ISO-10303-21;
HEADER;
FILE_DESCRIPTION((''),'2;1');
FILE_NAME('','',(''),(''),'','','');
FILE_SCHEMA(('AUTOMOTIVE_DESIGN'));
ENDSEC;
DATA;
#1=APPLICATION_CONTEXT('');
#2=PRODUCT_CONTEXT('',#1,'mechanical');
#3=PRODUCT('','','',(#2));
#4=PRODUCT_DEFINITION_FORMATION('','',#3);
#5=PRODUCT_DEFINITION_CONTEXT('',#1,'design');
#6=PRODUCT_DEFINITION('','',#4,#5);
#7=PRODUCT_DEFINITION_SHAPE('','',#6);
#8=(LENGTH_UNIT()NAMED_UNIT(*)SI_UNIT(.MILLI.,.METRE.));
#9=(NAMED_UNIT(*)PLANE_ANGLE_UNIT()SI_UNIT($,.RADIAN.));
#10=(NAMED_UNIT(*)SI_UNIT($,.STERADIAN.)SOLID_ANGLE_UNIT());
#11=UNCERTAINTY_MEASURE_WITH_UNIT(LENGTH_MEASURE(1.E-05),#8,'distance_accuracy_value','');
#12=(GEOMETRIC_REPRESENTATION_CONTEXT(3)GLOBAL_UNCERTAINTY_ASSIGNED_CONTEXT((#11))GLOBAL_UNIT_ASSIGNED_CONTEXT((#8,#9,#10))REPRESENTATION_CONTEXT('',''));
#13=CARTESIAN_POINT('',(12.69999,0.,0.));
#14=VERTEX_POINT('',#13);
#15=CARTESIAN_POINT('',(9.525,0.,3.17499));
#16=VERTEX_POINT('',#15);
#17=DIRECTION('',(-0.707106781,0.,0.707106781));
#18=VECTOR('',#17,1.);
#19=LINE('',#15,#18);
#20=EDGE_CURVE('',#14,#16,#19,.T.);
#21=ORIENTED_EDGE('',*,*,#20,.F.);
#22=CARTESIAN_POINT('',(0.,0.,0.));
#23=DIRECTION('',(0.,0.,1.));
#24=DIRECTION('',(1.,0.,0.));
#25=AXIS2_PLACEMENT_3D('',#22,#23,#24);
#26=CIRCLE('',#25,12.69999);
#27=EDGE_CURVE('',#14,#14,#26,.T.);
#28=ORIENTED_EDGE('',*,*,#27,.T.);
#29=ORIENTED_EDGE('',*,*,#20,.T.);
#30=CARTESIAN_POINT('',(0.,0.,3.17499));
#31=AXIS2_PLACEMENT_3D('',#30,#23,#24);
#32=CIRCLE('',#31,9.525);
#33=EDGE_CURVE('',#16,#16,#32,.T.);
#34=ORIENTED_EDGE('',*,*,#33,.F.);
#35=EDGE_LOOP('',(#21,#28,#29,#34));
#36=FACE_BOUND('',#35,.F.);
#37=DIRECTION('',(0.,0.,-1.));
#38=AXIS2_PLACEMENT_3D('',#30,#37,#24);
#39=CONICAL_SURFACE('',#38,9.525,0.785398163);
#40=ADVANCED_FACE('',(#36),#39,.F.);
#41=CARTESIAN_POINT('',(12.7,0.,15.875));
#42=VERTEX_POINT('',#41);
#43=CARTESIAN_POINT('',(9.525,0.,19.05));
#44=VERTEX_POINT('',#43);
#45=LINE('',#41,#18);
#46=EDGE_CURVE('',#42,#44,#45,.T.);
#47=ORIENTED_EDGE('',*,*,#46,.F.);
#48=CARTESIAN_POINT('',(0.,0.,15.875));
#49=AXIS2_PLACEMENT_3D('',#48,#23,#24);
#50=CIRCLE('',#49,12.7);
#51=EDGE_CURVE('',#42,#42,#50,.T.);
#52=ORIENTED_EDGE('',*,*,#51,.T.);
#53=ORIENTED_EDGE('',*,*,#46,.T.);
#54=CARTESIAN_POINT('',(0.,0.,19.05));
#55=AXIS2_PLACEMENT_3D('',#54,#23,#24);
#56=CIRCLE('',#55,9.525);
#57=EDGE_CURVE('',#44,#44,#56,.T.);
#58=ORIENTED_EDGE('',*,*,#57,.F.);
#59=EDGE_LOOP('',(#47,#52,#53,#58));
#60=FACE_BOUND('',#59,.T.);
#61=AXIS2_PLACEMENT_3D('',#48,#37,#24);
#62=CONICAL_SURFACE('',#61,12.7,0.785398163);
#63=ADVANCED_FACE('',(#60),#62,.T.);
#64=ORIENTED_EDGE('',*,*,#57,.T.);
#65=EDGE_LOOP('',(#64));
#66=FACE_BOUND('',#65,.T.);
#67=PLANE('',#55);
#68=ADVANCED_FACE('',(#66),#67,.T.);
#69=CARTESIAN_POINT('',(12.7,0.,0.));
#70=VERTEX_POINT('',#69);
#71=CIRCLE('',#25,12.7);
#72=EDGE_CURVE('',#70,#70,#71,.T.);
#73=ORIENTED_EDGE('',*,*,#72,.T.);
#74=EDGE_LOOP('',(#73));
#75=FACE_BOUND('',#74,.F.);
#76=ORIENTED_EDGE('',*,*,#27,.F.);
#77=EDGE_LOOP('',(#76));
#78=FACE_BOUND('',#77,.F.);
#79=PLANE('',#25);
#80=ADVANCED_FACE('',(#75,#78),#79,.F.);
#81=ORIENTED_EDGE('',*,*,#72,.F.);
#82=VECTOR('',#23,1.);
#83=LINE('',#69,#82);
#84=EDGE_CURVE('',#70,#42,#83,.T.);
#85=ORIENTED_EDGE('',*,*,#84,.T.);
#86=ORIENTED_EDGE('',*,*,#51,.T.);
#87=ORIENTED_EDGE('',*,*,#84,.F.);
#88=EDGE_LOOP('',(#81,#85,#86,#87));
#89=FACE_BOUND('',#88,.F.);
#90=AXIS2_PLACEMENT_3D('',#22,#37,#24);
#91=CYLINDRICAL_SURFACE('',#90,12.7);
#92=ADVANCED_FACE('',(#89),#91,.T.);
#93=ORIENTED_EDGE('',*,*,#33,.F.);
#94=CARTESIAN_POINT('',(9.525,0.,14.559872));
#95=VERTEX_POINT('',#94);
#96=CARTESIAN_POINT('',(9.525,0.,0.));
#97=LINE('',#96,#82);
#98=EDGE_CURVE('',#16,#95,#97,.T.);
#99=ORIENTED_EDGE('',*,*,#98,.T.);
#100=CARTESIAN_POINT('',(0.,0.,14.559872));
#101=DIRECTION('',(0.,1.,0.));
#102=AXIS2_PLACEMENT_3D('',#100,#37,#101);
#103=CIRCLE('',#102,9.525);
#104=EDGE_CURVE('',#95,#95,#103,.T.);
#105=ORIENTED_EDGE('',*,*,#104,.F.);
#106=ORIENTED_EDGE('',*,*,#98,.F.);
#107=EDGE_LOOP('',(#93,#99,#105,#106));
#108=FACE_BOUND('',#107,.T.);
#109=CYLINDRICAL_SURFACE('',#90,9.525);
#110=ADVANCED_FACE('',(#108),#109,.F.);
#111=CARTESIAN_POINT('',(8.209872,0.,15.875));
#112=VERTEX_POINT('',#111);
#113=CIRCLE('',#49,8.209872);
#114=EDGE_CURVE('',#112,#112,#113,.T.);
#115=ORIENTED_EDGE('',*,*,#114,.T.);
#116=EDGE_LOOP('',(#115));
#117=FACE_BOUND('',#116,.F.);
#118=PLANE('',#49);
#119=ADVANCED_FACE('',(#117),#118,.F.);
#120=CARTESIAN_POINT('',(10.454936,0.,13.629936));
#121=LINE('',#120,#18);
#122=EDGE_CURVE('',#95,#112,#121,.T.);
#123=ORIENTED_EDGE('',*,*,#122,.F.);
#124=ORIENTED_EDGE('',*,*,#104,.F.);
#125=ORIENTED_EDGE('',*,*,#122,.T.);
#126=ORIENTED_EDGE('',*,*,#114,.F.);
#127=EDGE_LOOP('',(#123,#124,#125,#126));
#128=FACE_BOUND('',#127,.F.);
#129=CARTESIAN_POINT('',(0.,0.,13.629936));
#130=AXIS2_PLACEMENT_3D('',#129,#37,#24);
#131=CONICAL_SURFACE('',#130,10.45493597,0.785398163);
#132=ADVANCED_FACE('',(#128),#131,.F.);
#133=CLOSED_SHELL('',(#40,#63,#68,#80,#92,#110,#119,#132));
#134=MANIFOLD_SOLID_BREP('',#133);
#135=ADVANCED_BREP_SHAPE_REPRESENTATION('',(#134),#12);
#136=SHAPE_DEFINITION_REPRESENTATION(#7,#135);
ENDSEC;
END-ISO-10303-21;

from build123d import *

# Parameters (mm, degrees)
F0_R     = 12.7
F1_DEPTH = 19.05
F2_SIZE  = 3.175
F3_T     = -3.175
F4_SIZE  = 3.17499


# Not quite as in the source:
# - a fillet or chamfer is up to 0.001 mm smaller than in the source, because OpenCascade refuses the exact size


with BuildPart() as f1:
    # F0 (on Top) → F1 (new body)
    with BuildSketch(Plane.XY):
        Circle(F0_R)
    extrude(amount=F1_DEPTH)

    # F2
    f2_edges = [f1.edges().sort_by_distance(p)[0] for p in [
        (-12.7, 0, 19.05),
    ]]
    chamfer(f2_edges, length=F2_SIZE)

    # F3
    f3_openings = [f1.faces().sort_by_distance(p)[0] for p in [
        (0, 0, 0),
    ]]
    offset(amount=F3_T, openings=f3_openings)

    # F4 (size 3.175 in the source; OpenCascade refuses exactly that, so slightly less here)
    f4_edges = [f1.edges().sort_by_distance(p)[0] for p in [
        (-9.525, 0, 0),
    ]]
    chamfer(f4_edges, length=F4_SIZE)


solid = f1.part
